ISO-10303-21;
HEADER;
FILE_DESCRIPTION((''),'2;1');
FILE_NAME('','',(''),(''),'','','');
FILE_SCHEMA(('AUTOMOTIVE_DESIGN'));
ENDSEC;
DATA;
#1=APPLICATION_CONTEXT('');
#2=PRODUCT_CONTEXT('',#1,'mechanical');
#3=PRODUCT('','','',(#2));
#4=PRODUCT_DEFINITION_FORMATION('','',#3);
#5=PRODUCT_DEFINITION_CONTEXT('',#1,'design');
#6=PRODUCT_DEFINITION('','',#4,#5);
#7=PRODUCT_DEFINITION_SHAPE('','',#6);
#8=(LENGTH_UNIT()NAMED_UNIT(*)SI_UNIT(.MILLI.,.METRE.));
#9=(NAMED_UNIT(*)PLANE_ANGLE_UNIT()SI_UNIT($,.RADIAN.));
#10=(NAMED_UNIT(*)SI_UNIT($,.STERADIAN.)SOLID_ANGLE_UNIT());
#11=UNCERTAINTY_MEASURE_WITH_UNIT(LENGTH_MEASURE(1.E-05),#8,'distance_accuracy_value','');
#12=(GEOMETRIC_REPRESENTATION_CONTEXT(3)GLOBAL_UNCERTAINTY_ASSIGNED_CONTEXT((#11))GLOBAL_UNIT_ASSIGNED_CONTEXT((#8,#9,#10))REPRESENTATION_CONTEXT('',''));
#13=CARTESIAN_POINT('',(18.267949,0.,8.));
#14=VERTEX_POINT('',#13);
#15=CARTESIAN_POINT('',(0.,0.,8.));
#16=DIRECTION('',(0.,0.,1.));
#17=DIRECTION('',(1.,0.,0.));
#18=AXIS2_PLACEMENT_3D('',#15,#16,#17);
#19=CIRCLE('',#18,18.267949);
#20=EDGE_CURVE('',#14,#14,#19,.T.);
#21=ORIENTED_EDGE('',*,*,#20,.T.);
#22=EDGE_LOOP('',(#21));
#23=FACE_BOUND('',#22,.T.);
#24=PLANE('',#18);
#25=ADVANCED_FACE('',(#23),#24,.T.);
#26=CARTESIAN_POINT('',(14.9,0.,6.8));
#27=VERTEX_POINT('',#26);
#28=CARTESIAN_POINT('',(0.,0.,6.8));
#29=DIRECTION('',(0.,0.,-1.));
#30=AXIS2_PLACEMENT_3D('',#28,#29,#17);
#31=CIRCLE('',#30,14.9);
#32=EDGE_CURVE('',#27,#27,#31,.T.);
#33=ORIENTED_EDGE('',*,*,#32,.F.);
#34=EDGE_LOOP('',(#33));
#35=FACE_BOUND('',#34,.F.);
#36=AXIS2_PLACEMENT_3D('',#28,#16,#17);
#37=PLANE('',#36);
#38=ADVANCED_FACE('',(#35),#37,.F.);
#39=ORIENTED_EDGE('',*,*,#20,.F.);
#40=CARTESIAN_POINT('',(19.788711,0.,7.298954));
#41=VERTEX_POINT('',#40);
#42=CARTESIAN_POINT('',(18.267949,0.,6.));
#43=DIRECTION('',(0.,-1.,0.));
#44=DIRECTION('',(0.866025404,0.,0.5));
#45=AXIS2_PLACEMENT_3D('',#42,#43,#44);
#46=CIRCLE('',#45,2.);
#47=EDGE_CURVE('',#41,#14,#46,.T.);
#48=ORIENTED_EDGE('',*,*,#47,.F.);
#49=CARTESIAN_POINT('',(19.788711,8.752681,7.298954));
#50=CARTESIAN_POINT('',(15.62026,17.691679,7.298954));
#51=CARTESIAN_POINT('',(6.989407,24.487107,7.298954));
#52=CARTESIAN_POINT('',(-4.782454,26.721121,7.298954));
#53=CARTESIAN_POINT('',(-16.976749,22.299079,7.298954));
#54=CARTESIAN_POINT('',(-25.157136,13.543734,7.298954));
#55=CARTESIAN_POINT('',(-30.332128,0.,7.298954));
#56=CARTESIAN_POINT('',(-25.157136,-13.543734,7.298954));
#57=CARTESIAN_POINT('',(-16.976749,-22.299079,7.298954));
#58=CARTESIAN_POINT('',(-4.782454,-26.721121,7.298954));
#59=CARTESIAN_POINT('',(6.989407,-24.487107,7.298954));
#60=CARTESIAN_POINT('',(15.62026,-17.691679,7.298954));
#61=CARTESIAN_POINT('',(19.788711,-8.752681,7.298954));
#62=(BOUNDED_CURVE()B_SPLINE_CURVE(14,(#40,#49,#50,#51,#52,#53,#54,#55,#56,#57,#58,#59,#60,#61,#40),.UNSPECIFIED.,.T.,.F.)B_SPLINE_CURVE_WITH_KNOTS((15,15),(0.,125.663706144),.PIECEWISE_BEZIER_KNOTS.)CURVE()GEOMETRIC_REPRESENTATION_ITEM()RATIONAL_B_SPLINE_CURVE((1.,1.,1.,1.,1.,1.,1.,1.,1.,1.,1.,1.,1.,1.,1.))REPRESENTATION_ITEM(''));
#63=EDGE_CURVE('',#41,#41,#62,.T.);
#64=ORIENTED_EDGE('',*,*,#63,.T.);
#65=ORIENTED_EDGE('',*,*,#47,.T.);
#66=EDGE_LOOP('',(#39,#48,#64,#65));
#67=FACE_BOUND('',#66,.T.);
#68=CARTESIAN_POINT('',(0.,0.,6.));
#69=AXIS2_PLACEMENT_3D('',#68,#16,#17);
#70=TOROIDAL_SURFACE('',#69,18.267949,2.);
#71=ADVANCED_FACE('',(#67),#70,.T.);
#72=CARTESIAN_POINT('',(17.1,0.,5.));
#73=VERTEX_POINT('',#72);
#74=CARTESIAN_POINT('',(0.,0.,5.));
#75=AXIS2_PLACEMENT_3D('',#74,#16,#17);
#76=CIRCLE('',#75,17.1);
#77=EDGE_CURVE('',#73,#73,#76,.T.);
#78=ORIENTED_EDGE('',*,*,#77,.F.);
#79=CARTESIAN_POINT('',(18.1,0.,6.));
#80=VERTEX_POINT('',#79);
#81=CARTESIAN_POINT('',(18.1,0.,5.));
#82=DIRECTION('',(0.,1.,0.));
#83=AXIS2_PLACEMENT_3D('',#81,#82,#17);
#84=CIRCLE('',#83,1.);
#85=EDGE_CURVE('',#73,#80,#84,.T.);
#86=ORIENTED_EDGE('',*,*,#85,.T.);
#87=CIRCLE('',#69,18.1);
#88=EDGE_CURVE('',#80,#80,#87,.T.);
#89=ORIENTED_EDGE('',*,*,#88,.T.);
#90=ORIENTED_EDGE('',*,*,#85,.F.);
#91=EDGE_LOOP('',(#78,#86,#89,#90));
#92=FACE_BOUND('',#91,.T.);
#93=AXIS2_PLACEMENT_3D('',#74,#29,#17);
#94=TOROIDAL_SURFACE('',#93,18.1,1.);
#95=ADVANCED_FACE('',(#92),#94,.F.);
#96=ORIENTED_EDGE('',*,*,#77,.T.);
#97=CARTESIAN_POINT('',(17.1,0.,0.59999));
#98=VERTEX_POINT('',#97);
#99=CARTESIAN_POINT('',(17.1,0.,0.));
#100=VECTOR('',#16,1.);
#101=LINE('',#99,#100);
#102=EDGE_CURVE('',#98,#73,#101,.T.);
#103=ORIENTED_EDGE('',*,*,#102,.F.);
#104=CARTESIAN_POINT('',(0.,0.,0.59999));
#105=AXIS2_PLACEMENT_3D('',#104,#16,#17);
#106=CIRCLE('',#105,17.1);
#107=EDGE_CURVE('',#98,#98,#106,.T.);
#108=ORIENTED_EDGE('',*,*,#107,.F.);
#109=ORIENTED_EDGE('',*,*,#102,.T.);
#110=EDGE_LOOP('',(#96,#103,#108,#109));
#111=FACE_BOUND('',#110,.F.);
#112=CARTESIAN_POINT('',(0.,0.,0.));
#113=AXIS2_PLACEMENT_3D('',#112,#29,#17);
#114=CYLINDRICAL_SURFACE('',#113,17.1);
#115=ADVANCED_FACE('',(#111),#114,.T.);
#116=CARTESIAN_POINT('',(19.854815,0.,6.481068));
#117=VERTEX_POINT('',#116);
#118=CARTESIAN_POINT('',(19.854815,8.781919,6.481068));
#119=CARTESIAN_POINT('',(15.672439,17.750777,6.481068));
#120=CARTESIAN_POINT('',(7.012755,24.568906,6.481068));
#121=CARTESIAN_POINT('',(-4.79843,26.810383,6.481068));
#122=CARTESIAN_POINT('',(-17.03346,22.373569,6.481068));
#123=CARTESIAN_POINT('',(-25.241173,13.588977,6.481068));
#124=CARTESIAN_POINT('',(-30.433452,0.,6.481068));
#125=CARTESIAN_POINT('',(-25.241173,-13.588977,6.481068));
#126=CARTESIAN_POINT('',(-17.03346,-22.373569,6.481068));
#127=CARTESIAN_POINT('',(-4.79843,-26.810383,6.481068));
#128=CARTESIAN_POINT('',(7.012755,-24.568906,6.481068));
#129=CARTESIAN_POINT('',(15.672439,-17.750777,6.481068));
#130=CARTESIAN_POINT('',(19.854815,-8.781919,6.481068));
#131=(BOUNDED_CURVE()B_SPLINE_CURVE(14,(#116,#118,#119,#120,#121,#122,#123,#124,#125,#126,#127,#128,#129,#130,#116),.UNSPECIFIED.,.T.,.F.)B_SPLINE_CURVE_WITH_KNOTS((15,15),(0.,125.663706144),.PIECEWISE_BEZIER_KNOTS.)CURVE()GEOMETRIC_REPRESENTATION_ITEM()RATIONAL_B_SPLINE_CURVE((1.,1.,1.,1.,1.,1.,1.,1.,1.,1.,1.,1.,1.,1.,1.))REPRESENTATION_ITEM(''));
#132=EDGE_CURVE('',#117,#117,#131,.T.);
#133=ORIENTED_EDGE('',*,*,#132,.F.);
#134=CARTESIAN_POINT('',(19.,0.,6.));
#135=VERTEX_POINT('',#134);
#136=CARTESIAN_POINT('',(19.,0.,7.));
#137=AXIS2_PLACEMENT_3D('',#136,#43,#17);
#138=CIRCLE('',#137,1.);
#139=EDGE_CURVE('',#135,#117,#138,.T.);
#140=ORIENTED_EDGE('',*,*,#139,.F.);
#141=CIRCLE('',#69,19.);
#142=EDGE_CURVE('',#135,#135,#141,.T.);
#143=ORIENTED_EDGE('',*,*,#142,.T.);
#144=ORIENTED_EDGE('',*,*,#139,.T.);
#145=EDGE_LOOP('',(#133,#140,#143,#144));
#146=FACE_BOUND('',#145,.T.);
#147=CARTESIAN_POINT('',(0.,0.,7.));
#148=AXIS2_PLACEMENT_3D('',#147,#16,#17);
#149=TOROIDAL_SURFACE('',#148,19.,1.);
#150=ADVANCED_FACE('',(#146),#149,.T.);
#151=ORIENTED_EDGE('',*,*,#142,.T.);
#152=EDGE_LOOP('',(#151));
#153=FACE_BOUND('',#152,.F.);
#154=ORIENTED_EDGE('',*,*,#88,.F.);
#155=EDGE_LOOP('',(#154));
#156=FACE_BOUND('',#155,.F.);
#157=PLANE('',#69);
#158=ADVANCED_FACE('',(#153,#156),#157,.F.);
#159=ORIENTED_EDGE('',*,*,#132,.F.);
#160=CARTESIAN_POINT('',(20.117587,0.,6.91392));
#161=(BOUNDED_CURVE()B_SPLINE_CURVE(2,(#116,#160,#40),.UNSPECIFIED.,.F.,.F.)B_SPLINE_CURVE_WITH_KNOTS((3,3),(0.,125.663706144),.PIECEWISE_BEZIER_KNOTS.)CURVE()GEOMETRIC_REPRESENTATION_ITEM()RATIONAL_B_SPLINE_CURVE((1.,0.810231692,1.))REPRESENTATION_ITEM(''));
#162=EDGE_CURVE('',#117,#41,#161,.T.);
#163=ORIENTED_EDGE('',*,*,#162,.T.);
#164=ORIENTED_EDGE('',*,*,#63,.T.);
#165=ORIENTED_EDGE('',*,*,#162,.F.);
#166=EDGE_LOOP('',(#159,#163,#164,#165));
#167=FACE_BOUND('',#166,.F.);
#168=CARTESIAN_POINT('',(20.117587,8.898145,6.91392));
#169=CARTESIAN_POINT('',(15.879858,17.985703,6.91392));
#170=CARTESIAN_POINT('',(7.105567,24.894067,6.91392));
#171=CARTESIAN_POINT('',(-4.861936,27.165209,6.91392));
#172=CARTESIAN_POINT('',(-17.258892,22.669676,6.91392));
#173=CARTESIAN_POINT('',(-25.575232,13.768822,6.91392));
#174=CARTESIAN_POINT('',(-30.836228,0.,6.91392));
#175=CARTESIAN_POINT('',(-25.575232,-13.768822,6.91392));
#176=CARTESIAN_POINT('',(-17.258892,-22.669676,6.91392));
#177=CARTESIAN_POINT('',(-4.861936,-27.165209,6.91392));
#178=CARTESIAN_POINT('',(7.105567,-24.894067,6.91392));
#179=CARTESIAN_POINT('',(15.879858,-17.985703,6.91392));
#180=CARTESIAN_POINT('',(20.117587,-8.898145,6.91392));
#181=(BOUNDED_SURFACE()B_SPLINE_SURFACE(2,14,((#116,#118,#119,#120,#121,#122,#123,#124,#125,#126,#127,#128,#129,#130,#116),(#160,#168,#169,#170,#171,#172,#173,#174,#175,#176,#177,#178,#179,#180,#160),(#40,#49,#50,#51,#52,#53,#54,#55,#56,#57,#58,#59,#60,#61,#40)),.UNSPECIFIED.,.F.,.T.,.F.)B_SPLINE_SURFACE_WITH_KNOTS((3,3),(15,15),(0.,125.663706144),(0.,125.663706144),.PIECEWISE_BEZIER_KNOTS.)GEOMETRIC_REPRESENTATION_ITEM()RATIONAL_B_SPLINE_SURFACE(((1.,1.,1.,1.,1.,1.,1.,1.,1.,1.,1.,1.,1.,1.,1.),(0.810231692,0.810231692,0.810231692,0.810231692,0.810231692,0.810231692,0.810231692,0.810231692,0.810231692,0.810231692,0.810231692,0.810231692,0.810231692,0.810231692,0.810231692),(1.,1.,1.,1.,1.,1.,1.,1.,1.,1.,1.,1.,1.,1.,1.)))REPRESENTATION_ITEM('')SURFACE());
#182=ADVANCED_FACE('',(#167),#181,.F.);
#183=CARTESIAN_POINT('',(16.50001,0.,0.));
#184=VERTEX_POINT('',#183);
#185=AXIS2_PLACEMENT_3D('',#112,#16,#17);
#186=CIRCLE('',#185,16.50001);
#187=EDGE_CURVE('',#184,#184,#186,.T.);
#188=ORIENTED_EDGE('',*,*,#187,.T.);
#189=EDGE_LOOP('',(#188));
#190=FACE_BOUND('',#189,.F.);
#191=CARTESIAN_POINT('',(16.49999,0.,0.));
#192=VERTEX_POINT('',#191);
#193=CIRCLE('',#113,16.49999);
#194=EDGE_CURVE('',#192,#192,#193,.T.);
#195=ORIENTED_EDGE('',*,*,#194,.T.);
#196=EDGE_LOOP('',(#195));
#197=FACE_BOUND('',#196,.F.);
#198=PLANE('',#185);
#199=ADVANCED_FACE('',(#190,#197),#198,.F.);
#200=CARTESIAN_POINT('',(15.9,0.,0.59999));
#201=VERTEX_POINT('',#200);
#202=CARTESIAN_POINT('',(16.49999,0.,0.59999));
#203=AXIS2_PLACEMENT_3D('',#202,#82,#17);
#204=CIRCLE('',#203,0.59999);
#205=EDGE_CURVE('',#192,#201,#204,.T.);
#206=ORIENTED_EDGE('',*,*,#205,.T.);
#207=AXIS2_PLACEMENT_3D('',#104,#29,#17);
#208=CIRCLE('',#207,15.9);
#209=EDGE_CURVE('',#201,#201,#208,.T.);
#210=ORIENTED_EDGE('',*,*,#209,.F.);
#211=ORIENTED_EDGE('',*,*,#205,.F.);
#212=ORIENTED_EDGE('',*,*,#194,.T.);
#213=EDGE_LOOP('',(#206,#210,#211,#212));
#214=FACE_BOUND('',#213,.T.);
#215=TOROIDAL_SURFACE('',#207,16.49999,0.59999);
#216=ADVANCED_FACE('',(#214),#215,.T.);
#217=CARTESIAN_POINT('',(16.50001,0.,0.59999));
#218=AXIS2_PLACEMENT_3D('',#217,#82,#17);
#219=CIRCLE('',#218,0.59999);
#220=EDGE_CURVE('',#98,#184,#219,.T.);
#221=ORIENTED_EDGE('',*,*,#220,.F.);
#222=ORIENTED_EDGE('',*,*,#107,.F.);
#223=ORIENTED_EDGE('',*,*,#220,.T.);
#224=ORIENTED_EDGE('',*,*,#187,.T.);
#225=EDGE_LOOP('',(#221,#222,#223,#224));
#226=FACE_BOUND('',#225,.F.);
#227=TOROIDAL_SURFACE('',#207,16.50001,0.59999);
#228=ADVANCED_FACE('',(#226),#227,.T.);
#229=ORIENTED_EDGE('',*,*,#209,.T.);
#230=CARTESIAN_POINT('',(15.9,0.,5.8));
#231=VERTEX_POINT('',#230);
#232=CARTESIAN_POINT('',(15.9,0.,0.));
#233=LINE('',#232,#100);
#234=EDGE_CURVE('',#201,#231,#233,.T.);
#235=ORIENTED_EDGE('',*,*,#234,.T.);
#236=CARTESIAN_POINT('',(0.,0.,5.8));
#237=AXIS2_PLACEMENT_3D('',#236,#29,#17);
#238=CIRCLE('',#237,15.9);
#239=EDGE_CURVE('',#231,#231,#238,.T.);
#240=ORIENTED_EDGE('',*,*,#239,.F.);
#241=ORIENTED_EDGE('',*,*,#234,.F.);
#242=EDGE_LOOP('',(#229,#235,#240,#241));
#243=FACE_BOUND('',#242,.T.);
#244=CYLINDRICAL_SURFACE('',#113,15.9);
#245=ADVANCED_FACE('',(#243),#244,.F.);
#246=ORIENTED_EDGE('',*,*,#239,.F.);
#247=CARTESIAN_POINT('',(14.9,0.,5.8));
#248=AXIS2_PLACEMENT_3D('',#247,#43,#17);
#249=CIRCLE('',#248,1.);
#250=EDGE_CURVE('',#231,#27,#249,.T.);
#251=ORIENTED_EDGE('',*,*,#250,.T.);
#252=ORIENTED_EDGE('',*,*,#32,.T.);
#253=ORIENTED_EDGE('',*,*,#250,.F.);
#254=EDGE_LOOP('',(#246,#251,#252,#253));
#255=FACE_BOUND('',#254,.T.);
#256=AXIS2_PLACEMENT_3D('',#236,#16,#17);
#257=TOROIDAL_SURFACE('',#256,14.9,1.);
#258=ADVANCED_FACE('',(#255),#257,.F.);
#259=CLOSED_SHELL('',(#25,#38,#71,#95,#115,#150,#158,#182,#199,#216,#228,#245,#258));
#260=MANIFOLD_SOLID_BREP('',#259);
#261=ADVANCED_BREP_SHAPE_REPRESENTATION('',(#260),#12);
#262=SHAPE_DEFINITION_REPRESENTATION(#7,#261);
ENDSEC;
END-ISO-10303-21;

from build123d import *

# Parameters (mm, degrees)
F0_R     = 17.1
F1_DEPTH = 6
F2_R     = 20
F2_R_2   = 17.1
F3_DEPTH = 2
F4_T     = -1.2
F5_R     = 0.59999
F6_R     = 1
F8_R     = 0.7


# Not quite as in the source:
# - a fillet or chamfer that OpenCascade refuses, or shapes differently, is made with other operations: its cross-section is extruded or revolved along the edge and cut away or added
# - a fillet or chamfer is up to 0.001 mm smaller than in the source, because OpenCascade refuses the exact size


with BuildPart() as f1:
    # F0 (on Top) → F1 (new body)
    with BuildSketch(Plane.XY):
        Circle(F0_R)
    extrude(amount=F1_DEPTH)

    # F2 (on face) → F3 (join)
    with BuildSketch(Plane.XY.offset(6)):
        Circle(F2_R)
        Circle(F2_R_2, mode=Mode.SUBTRACT)
        Circle(F2_R_2)
    extrude(amount=F3_DEPTH)

    # F4
    f4_openings = [f1.faces().sort_by_distance(p)[0] for p in [
        (0, 0, 0),
    ]]
    offset(amount=F4_T, openings=f4_openings, kind=Kind.INTERSECTION)

    # F5 (radius 0.6 in the source; OpenCascade refuses exactly that, so slightly less here)
    f5_edges = [f1.edges().sort_by_distance(p)[0] for p in [
        (-15.9, 0, 0),
        (-17.1, 0, 0),
    ]]
    fillet(f5_edges, radius=F5_R)

    # F6
    f6_edges = [f1.edges().sort_by_distance(p)[0] for p in [
        (-17.1, 0, 6),
        (-20, 0, 6),
        (-15.9, 0, 6.8),
    ]]
    fillet(f6_edges, radius=F6_R)

    # F7: fillet of radius 2 on 1 edges, made by hand

    # F7_s1 → F7_t2 (revolve, cut)
    with BuildSketch(Plane.XZ):
        with BuildLine():
            ThreePointArc((20, 7), (19.2679491924, 7.7320508076), (18.2679491924, 8))
            Line((18.2679491924, 8), (18.2679491924, 8.04))
            Line((18.2679491924, 8.04), (20, 8.04))
            Line((20, 8.04), (20.04, 8))
            ThreePointArc((20.04, 8), (20.04, 7.5), (20.0346410162, 7.02))
            Line((20.0346410162, 7.02), (20, 7))
        make_face()
    revolve(axis=Axis((0, 0, 8), (0, 0, 1)), mode=Mode.SUBTRACT)

    # F8
    f8_edges = [f1.edges().sort_by_distance(p)[0] for p in [
        (-20, 0, 7),
    ]]
    fillet(f8_edges, radius=F8_R)


solid = f1.part
